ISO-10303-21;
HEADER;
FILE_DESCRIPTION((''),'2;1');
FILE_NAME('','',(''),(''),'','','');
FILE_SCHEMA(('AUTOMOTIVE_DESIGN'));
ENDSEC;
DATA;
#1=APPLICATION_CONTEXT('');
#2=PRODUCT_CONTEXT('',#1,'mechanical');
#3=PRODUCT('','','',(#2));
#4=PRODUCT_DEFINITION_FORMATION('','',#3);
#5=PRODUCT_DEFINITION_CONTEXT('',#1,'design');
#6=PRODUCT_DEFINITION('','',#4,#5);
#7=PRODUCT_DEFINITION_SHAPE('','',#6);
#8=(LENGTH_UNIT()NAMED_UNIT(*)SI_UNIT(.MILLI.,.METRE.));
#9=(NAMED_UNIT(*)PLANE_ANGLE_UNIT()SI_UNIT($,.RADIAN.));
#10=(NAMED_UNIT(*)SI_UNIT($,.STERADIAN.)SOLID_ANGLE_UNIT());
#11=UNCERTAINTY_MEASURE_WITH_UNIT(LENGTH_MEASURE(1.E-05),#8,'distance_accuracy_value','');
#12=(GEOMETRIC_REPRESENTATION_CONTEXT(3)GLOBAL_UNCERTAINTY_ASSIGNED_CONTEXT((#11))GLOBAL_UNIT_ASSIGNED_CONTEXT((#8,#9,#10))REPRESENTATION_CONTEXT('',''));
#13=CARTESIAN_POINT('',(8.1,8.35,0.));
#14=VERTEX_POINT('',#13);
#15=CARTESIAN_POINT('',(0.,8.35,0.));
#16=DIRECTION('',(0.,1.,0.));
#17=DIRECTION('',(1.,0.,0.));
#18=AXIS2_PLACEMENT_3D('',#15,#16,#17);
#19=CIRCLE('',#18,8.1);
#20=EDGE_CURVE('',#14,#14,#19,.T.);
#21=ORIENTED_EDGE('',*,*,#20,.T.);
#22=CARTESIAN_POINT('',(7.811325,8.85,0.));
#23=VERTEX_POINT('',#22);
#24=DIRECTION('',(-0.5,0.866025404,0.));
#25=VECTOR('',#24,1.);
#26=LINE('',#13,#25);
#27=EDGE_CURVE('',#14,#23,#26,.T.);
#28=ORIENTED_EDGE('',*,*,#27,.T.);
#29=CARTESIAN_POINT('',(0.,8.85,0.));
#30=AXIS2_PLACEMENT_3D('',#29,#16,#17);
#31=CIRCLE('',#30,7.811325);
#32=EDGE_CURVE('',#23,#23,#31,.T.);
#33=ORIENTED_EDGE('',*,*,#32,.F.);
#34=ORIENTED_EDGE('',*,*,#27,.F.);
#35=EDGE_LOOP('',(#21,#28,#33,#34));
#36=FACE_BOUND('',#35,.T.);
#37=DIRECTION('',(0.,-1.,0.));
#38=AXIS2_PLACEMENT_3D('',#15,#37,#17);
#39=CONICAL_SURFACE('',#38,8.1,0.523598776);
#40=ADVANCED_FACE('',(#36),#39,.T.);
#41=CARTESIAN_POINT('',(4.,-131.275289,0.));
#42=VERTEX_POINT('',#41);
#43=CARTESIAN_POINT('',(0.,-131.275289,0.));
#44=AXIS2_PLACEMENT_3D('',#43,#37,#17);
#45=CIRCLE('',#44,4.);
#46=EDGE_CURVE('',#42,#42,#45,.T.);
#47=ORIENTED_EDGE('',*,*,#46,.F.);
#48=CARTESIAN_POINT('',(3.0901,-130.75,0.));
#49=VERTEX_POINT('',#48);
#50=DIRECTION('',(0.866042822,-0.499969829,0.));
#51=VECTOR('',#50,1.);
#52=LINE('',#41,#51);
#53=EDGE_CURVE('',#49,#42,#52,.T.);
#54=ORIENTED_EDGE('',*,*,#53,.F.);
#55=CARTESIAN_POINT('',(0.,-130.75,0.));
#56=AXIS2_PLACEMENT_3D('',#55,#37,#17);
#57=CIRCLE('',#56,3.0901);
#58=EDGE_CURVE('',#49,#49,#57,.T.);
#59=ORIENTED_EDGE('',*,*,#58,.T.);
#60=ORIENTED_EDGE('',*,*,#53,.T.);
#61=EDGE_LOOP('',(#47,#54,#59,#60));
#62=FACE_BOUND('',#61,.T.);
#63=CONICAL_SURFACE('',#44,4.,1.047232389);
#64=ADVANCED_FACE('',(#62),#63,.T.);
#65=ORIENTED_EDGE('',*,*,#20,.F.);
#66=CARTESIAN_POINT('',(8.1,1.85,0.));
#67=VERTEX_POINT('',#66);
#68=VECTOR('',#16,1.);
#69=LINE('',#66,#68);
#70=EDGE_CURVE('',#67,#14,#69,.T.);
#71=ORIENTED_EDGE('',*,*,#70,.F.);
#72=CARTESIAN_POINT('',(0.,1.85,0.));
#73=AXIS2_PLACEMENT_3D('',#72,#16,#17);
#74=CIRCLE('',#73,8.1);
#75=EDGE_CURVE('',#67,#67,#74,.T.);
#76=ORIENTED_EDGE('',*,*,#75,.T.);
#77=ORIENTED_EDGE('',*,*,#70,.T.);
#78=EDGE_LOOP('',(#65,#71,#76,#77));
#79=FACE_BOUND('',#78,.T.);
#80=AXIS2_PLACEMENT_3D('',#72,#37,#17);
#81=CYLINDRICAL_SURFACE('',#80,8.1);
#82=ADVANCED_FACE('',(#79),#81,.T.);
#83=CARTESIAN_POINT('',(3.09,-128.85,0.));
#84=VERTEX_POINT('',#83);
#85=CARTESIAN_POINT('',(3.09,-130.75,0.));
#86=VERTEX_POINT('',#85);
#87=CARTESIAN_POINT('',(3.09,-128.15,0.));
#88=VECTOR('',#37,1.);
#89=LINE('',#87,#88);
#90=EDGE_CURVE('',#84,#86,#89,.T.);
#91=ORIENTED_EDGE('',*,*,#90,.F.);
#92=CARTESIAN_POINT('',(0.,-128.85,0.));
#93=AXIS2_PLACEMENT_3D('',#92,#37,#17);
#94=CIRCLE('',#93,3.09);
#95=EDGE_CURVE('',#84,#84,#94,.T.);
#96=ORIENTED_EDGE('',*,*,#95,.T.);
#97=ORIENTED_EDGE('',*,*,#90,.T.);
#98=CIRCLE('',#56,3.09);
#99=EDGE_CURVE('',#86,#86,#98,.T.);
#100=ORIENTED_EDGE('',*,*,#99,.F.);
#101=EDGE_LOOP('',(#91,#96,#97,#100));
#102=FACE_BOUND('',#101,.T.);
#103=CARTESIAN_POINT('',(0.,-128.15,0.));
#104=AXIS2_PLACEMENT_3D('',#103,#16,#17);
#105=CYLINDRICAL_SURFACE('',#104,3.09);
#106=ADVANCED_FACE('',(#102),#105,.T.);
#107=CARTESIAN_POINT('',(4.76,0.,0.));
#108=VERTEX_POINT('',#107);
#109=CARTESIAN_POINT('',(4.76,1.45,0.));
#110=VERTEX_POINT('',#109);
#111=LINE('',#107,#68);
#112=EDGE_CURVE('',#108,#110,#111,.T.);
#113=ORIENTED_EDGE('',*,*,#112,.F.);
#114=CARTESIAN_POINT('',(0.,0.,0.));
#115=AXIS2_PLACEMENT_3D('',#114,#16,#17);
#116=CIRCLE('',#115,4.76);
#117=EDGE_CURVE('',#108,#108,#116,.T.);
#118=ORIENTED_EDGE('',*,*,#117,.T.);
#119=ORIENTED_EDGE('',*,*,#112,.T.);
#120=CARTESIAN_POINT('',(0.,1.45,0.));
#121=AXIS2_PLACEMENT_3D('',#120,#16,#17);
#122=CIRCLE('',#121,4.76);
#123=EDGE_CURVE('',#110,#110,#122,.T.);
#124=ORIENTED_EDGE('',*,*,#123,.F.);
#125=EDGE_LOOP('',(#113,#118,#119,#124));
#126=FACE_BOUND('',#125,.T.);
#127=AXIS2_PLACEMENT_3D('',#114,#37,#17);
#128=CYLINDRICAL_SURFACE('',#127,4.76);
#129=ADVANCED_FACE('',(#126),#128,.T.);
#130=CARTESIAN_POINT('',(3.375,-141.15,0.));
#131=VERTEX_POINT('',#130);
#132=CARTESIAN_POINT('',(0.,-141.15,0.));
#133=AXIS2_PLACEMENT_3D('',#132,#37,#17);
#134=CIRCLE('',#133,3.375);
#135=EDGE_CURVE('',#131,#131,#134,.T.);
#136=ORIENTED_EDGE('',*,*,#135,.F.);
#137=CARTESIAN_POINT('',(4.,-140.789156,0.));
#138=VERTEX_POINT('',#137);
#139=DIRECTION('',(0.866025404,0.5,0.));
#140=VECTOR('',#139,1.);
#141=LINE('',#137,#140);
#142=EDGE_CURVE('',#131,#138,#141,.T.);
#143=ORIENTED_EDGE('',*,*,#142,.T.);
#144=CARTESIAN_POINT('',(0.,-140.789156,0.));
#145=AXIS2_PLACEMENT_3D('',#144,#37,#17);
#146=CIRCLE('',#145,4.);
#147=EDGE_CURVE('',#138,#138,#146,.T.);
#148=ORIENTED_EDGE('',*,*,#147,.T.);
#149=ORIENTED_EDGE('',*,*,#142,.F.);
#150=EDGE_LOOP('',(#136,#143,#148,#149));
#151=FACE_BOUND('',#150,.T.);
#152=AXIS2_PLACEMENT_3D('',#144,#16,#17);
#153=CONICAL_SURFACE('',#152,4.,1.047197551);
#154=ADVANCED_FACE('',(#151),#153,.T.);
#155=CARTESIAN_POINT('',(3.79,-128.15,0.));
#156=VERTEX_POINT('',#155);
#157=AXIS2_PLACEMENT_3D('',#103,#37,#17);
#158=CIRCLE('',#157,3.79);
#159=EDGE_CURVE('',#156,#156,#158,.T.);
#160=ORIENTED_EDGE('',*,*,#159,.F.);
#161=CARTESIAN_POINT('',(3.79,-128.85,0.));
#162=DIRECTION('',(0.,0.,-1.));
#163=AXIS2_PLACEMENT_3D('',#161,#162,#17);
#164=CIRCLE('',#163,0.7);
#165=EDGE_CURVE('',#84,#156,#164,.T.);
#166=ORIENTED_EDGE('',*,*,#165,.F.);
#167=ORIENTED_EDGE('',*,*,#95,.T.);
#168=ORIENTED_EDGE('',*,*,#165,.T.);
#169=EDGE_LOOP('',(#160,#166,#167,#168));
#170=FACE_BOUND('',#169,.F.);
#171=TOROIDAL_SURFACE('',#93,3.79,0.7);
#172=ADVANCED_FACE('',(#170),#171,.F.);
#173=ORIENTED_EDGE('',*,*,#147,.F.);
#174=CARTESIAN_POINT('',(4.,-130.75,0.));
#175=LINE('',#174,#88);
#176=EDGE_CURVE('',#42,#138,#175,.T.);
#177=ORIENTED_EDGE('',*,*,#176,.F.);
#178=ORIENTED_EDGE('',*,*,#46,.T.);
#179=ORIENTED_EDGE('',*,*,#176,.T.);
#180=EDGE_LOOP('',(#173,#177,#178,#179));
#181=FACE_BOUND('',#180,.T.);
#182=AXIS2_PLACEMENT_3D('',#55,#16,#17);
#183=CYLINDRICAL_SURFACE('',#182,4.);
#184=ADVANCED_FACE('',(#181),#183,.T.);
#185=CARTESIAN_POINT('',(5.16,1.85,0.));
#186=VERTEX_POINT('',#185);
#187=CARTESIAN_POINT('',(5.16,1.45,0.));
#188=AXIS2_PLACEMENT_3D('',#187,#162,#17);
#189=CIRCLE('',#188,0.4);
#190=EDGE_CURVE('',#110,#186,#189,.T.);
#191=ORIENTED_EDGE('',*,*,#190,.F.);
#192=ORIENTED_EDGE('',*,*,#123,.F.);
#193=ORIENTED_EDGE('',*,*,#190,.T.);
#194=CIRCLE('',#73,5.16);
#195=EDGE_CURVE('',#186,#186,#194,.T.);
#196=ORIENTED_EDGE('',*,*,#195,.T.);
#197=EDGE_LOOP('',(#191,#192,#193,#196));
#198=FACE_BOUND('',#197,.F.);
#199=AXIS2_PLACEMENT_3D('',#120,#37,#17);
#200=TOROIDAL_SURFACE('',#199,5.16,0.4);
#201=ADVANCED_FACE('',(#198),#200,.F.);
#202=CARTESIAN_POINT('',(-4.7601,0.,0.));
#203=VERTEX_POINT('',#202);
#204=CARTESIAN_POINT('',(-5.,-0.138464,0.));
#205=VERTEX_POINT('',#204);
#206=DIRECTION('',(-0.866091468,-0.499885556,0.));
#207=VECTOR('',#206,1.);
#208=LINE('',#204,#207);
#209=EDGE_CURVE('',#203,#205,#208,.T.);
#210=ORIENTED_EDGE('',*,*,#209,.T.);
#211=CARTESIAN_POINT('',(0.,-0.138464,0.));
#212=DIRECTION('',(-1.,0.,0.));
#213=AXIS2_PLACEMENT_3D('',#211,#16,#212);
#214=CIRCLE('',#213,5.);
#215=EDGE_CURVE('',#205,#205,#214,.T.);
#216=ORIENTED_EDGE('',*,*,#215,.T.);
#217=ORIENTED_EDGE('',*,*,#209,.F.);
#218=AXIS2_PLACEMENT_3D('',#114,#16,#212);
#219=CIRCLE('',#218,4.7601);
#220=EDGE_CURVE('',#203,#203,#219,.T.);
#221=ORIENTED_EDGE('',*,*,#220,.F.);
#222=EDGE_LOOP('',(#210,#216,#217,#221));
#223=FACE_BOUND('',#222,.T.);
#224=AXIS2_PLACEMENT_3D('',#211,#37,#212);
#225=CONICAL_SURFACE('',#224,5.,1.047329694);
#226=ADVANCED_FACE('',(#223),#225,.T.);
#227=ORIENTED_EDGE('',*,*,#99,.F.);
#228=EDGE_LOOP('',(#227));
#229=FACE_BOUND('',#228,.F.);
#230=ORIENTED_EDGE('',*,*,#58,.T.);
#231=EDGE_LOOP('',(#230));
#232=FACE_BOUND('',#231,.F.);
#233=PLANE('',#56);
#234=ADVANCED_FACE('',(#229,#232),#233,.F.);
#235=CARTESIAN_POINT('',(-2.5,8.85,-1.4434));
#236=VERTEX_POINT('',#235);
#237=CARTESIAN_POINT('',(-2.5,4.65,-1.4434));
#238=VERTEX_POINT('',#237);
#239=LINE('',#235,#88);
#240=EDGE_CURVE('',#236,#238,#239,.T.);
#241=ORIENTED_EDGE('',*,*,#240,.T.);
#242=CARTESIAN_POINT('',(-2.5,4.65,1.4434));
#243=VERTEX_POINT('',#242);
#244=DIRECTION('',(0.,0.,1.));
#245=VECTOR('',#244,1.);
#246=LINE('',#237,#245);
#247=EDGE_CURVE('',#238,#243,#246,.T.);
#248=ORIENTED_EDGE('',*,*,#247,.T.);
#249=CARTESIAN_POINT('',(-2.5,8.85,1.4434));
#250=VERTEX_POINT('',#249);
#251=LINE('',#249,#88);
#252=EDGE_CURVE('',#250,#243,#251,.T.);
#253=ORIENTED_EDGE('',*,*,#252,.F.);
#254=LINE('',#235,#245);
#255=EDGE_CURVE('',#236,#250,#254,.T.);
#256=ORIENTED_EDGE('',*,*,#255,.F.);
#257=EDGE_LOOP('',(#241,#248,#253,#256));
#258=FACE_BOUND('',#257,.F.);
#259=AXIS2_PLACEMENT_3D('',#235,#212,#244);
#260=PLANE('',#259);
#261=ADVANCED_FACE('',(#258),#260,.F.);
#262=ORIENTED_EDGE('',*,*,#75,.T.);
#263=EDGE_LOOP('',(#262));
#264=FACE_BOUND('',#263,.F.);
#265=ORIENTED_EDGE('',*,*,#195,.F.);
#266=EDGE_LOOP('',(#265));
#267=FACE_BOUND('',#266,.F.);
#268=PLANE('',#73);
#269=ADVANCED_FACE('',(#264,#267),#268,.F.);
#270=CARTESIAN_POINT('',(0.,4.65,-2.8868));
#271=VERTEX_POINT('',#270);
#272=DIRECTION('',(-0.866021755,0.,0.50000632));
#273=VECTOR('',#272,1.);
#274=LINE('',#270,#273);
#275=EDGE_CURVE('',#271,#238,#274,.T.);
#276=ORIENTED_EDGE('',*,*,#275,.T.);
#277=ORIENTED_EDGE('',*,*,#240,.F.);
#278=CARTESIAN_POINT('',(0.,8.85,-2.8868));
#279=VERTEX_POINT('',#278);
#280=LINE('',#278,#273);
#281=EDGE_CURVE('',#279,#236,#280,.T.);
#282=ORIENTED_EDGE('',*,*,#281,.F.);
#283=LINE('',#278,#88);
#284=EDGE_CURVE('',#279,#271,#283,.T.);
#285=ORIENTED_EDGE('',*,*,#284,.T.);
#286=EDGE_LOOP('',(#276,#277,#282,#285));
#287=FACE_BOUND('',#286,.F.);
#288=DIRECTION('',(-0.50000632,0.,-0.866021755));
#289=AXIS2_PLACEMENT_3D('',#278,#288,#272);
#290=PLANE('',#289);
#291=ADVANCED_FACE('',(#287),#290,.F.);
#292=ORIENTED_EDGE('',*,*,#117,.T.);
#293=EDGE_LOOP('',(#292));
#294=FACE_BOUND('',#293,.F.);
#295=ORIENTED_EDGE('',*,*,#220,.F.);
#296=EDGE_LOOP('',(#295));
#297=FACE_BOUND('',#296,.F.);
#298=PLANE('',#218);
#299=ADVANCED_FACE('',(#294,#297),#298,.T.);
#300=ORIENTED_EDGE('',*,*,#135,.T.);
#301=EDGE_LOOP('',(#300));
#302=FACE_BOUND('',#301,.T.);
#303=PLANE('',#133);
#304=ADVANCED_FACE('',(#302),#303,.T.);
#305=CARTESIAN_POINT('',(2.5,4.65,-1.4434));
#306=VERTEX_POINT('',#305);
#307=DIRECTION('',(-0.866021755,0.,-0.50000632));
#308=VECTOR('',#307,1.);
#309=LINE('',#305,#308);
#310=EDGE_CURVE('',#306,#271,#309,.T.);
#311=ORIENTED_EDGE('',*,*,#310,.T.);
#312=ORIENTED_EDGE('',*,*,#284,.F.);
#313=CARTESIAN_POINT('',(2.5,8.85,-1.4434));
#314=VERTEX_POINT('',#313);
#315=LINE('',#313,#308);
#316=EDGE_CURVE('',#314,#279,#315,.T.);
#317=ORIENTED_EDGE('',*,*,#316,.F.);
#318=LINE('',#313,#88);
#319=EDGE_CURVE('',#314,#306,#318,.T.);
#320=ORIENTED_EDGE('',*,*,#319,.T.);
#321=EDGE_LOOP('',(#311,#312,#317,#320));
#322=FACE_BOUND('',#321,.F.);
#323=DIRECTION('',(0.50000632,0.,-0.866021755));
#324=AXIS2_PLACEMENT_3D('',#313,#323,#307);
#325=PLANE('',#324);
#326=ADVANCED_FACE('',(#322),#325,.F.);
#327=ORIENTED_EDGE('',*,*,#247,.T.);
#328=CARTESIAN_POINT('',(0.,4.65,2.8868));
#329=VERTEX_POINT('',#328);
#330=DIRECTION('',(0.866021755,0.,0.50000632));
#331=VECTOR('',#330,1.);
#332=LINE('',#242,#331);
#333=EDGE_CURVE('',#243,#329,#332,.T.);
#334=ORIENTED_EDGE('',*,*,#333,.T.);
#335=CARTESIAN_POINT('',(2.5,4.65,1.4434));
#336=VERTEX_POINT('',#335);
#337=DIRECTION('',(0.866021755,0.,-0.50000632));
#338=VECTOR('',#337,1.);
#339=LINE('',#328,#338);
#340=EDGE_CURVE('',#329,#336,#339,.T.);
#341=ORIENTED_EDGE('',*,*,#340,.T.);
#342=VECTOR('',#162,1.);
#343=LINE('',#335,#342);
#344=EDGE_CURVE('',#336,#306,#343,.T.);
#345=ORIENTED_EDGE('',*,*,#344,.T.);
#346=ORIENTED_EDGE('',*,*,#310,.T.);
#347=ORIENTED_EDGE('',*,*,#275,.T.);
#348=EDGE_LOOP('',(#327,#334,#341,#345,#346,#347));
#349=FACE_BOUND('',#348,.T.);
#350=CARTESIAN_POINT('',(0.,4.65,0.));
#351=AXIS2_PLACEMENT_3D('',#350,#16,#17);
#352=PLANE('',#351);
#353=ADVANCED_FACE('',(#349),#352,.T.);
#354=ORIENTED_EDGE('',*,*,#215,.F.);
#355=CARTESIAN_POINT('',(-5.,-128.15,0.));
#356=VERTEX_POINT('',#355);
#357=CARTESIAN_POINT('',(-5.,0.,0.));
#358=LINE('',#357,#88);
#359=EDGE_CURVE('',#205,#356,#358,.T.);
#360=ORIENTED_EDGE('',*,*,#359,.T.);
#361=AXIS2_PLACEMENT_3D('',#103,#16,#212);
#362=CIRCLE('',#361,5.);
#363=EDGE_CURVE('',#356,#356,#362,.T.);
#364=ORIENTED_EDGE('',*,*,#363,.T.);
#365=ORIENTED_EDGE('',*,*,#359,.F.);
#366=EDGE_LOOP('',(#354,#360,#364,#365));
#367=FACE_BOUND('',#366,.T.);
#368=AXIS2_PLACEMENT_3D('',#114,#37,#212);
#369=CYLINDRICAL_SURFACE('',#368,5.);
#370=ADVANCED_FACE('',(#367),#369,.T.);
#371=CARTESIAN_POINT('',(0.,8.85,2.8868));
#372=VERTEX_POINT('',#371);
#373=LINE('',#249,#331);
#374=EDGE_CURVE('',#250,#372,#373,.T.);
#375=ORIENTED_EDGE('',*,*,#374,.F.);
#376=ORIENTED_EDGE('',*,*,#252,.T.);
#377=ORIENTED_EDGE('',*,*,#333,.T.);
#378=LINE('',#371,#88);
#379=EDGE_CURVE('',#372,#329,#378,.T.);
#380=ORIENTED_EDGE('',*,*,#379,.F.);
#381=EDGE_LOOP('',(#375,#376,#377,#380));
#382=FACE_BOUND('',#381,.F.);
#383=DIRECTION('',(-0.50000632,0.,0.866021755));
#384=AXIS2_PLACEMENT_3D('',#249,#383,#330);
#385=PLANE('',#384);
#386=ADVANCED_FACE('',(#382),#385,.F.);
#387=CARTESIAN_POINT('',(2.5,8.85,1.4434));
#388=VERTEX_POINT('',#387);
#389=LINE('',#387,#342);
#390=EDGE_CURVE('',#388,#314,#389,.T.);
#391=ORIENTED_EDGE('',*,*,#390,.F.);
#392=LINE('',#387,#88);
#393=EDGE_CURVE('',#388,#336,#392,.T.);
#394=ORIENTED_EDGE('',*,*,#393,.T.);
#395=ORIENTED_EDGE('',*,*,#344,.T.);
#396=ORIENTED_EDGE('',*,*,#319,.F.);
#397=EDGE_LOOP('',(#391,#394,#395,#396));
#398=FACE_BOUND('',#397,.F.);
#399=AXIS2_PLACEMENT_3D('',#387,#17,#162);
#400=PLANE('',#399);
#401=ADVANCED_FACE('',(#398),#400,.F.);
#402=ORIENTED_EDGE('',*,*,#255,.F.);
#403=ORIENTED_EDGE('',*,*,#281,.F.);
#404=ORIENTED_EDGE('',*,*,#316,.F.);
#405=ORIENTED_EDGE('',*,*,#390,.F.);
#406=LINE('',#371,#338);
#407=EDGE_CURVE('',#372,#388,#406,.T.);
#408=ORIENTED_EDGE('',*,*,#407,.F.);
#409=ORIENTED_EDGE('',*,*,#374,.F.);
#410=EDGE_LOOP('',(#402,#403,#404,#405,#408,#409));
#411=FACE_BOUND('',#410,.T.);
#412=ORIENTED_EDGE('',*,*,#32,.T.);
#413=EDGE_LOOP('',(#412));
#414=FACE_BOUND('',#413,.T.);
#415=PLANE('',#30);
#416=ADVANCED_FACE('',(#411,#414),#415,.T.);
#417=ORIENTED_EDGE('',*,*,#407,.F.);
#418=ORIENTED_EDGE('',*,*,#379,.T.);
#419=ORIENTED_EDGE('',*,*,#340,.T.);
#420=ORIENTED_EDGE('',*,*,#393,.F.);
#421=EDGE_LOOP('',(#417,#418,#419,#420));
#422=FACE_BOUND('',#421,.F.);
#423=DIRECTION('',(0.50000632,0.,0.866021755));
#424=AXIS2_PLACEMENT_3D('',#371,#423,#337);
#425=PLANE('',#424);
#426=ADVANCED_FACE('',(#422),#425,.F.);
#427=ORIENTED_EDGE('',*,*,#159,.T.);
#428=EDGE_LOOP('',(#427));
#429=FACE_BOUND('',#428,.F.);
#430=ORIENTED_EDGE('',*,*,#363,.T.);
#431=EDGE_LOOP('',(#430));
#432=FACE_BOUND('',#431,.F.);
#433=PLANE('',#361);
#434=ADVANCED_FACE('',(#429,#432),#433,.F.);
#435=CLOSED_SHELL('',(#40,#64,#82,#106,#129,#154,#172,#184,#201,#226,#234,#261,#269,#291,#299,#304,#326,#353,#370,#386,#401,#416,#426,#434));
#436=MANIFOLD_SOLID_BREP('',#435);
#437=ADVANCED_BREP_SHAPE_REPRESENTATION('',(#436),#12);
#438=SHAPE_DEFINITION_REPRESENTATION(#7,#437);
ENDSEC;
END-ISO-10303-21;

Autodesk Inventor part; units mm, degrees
ref_plane "YZ Plane" through (0, 0, 0) normal (1, 0, 0) x (0, 1, 0)
ref_plane "XZ Plane" through (0, 0, 0) normal (0, 1, 0) x (-1, 0, 0)
ref_plane "XY Plane" through (0, 0, 0) normal (0, 0, 1) x (1, 0, 0)
sketch "Sketch1" plane through (0, 0, 0) normal (0, 0, 1) x (1, 0, 0)
  line L0 (0, 0) -> (-5, 0)
  line L1 (-5, 0) -> (-5, -128.15)
  line L2 (-5, -128.15) -> (0, -128.15)
  line L3 (0, -128.15) -> (0, 0)
  line L4 (0, 0) -> (-13.1356, 0) construction
  dimension "d1" = 128.15
  dimension "d2" = 5
revolve "Shoulder" add sketch "Sketch1" angle 360 about axis through (0, -128.15, 0) along (0, 1, 0)
sketch "Sketch2" plane through (0, 0, 0) normal (0, 1, 0) x (1, 0, 0)
  circle A0 centre (0, 0) radius 5 projected
  circle A1 centre (0, 0) radius 4.76
  dimension "d3" = 9.52
extrude "Shoulder_neck" add sketch "Sketch2" along normal blind 1.85 contours A1
sketch "Sketch3" plane through (0, 1.85, 0) normal (0, 1, 0) x (1, 0, 0)
  circle A0 centre (0, 0) radius 4.76 projected
  circle A1 centre (0, 0) radius 8.1
  dimension "d6" = 16.2
extrude "Head" add sketch "Sketch3" along normal blind 7 contours A0 | A1
sketch "Sketch4" plane through (0, -128.15, 0) normal (0, -1, 0) x (1, 0, 0)
  circle A0 centre (0, 0) radius 5 projected
  circle A1 centre (0, 0) radius 3.09
  dimension "d9" = 6.18
extrude "Thread_neck" add sketch "Sketch4" along normal blind 2.6 contours A1
sketch "Sketch5" plane through (0, -130.75, 0) normal (0, -1, 0) x (1, 0, 0)
  circle A0 centre (0, 0) radius 3.09 projected
  circle A1 centre (0, 0) radius 4
  dimension "d12" = 8
extrude "Thread_shoulder" add sketch "Sketch5" along normal blind 10.4 contours A0 | A1
sketch "Sketch6" plane through (0, 8.85, 0) normal (0, 1, 0) x (1, 0, 0)
  circle A0 centre (0, 0) radius 8.1 projected
  circle A1 centre (0, 0) radius 2.5 construction
  line L0 (-2.5, 1.4434) -> (-2.5, -1.4434)
  line L1 (-2.5, -1.4434) -> (0, -2.8868)
  line L2 (0, -2.8868) -> (2.5, -1.4434)
  line L3 (2.5, -1.4434) -> (2.5, 1.4434)
  line L4 (2.5, 1.4434) -> (0, 2.8868)
  line L5 (0, 2.8868) -> (-2.5, 1.4434)
  dimension "d15" = 5
extrude "Hex" cut sketch "Sketch6" against normal blind 4.2 contours L5 L4 L3 L2 L1 L0
chamfer "Chamfer1" distance 0.24 angle 30 1 edges at (5, 0, 0) measured on face at (-4.8255, 0, -0.7786)
fillet "Fillet1" radius 0.4 1 edges at (-4.76, 1.85, 0)
chamfer "Chamfer2" distance 0.5 angle 30 1 edges at (-8.1, 8.85, 0) measured on face at (7.9951, 6.5167, 1.2993)
chamfer "Chamfer3" distance 0.625 angle 30 1 edges at (-4, -141.15, 0) measured on face at (0.7574, -141.15, 1.0973)
fillet "Fillet2" radius 0.7 1 edges at (-3.09, -128.15, 0)
chamfer "Chamfer7" distance 0.91 angle 30 1 edges at (-4, -130.75, 0) measured on face at (3.6579, -130.75, -0.3191)
thread "Thread" size "M8x1.25" class "6g" standard "ANSI Metric M Profile" full length
equation "\"d3\" = Shoulder_neck_dia"
equation "\"d4\" = Shoulder_neck_length"
equation "\"d6\" = Head_diameter"
equation "\"d7\" = Head_height"
equation "\"d9\" = Thread_neck_dia"
equation "\"d10\" = Thread_neck_length"
equation "\"d12\" = Thread_diameter"
equation "\"d13\" = Thread_length - Thread_neck_length"
equation "\"d15\" = Hex_size"
equation "\"d16\" = Hex_length"
equation "\"d18\" = -0.5 * Shoulder_neck_dia + 0.5 * Shoulder_diameter"
equation "\"d64\" = -0.5 * Shoulder_neck_dia + 0.5 * Shoulder_diameter"
equation "\"d21\" = 0.1 * Hex_size"
equation "\"d65\" = 0.1 * Hex_size"
equation "\"d23\" = 0.5 * Thread_pitch"
equation "\"d66\" = 0.5 * Thread_pitch"
equation "\"d25\" = Thread_neck_radius"
equation "\"d60\" = -0.5 * Thread_neck_dia + 0.5 * Thread_diameter"
equation "\"d67\" = -0.5 * Thread_neck_dia + 0.5 * Thread_diameter"
equation "\"d1\" = Shoulder_length - Shoulder_neck_length"
equation "\"d2\" = 0.5 * Shoulder_diameter"
equation "\"Shoulder_length\" = 130"
equation "\"Shoulder_neck_dia\" = 9.52"
equation "\"Thread_diameter\" = 8"
equation "\"Thread_length\" = 13"
equation "\"Head_diameter\" = 16.2"
equation "\"Head_height\" = 7"
equation "\"Thread_neck_dia\" = 6.18"
equation "\"Hex_size\" = 5"
equation "\"Hex_length\" = 4.2"
equation "\"Thread_pitch\" = 1.25"
equation "\"Shoulder_neck_length\" = 1.85"
equation "\"Thread_neck_length\" = 2.6"
equation "\"Thread_neck_radius\" = 0.7"
equation "\"Shoulder_diameter\" = 10"
properties part number "SCREW,SHOULDER,P,12.9,M10X130MM" material "Steel, High Strength Low Alloy"
